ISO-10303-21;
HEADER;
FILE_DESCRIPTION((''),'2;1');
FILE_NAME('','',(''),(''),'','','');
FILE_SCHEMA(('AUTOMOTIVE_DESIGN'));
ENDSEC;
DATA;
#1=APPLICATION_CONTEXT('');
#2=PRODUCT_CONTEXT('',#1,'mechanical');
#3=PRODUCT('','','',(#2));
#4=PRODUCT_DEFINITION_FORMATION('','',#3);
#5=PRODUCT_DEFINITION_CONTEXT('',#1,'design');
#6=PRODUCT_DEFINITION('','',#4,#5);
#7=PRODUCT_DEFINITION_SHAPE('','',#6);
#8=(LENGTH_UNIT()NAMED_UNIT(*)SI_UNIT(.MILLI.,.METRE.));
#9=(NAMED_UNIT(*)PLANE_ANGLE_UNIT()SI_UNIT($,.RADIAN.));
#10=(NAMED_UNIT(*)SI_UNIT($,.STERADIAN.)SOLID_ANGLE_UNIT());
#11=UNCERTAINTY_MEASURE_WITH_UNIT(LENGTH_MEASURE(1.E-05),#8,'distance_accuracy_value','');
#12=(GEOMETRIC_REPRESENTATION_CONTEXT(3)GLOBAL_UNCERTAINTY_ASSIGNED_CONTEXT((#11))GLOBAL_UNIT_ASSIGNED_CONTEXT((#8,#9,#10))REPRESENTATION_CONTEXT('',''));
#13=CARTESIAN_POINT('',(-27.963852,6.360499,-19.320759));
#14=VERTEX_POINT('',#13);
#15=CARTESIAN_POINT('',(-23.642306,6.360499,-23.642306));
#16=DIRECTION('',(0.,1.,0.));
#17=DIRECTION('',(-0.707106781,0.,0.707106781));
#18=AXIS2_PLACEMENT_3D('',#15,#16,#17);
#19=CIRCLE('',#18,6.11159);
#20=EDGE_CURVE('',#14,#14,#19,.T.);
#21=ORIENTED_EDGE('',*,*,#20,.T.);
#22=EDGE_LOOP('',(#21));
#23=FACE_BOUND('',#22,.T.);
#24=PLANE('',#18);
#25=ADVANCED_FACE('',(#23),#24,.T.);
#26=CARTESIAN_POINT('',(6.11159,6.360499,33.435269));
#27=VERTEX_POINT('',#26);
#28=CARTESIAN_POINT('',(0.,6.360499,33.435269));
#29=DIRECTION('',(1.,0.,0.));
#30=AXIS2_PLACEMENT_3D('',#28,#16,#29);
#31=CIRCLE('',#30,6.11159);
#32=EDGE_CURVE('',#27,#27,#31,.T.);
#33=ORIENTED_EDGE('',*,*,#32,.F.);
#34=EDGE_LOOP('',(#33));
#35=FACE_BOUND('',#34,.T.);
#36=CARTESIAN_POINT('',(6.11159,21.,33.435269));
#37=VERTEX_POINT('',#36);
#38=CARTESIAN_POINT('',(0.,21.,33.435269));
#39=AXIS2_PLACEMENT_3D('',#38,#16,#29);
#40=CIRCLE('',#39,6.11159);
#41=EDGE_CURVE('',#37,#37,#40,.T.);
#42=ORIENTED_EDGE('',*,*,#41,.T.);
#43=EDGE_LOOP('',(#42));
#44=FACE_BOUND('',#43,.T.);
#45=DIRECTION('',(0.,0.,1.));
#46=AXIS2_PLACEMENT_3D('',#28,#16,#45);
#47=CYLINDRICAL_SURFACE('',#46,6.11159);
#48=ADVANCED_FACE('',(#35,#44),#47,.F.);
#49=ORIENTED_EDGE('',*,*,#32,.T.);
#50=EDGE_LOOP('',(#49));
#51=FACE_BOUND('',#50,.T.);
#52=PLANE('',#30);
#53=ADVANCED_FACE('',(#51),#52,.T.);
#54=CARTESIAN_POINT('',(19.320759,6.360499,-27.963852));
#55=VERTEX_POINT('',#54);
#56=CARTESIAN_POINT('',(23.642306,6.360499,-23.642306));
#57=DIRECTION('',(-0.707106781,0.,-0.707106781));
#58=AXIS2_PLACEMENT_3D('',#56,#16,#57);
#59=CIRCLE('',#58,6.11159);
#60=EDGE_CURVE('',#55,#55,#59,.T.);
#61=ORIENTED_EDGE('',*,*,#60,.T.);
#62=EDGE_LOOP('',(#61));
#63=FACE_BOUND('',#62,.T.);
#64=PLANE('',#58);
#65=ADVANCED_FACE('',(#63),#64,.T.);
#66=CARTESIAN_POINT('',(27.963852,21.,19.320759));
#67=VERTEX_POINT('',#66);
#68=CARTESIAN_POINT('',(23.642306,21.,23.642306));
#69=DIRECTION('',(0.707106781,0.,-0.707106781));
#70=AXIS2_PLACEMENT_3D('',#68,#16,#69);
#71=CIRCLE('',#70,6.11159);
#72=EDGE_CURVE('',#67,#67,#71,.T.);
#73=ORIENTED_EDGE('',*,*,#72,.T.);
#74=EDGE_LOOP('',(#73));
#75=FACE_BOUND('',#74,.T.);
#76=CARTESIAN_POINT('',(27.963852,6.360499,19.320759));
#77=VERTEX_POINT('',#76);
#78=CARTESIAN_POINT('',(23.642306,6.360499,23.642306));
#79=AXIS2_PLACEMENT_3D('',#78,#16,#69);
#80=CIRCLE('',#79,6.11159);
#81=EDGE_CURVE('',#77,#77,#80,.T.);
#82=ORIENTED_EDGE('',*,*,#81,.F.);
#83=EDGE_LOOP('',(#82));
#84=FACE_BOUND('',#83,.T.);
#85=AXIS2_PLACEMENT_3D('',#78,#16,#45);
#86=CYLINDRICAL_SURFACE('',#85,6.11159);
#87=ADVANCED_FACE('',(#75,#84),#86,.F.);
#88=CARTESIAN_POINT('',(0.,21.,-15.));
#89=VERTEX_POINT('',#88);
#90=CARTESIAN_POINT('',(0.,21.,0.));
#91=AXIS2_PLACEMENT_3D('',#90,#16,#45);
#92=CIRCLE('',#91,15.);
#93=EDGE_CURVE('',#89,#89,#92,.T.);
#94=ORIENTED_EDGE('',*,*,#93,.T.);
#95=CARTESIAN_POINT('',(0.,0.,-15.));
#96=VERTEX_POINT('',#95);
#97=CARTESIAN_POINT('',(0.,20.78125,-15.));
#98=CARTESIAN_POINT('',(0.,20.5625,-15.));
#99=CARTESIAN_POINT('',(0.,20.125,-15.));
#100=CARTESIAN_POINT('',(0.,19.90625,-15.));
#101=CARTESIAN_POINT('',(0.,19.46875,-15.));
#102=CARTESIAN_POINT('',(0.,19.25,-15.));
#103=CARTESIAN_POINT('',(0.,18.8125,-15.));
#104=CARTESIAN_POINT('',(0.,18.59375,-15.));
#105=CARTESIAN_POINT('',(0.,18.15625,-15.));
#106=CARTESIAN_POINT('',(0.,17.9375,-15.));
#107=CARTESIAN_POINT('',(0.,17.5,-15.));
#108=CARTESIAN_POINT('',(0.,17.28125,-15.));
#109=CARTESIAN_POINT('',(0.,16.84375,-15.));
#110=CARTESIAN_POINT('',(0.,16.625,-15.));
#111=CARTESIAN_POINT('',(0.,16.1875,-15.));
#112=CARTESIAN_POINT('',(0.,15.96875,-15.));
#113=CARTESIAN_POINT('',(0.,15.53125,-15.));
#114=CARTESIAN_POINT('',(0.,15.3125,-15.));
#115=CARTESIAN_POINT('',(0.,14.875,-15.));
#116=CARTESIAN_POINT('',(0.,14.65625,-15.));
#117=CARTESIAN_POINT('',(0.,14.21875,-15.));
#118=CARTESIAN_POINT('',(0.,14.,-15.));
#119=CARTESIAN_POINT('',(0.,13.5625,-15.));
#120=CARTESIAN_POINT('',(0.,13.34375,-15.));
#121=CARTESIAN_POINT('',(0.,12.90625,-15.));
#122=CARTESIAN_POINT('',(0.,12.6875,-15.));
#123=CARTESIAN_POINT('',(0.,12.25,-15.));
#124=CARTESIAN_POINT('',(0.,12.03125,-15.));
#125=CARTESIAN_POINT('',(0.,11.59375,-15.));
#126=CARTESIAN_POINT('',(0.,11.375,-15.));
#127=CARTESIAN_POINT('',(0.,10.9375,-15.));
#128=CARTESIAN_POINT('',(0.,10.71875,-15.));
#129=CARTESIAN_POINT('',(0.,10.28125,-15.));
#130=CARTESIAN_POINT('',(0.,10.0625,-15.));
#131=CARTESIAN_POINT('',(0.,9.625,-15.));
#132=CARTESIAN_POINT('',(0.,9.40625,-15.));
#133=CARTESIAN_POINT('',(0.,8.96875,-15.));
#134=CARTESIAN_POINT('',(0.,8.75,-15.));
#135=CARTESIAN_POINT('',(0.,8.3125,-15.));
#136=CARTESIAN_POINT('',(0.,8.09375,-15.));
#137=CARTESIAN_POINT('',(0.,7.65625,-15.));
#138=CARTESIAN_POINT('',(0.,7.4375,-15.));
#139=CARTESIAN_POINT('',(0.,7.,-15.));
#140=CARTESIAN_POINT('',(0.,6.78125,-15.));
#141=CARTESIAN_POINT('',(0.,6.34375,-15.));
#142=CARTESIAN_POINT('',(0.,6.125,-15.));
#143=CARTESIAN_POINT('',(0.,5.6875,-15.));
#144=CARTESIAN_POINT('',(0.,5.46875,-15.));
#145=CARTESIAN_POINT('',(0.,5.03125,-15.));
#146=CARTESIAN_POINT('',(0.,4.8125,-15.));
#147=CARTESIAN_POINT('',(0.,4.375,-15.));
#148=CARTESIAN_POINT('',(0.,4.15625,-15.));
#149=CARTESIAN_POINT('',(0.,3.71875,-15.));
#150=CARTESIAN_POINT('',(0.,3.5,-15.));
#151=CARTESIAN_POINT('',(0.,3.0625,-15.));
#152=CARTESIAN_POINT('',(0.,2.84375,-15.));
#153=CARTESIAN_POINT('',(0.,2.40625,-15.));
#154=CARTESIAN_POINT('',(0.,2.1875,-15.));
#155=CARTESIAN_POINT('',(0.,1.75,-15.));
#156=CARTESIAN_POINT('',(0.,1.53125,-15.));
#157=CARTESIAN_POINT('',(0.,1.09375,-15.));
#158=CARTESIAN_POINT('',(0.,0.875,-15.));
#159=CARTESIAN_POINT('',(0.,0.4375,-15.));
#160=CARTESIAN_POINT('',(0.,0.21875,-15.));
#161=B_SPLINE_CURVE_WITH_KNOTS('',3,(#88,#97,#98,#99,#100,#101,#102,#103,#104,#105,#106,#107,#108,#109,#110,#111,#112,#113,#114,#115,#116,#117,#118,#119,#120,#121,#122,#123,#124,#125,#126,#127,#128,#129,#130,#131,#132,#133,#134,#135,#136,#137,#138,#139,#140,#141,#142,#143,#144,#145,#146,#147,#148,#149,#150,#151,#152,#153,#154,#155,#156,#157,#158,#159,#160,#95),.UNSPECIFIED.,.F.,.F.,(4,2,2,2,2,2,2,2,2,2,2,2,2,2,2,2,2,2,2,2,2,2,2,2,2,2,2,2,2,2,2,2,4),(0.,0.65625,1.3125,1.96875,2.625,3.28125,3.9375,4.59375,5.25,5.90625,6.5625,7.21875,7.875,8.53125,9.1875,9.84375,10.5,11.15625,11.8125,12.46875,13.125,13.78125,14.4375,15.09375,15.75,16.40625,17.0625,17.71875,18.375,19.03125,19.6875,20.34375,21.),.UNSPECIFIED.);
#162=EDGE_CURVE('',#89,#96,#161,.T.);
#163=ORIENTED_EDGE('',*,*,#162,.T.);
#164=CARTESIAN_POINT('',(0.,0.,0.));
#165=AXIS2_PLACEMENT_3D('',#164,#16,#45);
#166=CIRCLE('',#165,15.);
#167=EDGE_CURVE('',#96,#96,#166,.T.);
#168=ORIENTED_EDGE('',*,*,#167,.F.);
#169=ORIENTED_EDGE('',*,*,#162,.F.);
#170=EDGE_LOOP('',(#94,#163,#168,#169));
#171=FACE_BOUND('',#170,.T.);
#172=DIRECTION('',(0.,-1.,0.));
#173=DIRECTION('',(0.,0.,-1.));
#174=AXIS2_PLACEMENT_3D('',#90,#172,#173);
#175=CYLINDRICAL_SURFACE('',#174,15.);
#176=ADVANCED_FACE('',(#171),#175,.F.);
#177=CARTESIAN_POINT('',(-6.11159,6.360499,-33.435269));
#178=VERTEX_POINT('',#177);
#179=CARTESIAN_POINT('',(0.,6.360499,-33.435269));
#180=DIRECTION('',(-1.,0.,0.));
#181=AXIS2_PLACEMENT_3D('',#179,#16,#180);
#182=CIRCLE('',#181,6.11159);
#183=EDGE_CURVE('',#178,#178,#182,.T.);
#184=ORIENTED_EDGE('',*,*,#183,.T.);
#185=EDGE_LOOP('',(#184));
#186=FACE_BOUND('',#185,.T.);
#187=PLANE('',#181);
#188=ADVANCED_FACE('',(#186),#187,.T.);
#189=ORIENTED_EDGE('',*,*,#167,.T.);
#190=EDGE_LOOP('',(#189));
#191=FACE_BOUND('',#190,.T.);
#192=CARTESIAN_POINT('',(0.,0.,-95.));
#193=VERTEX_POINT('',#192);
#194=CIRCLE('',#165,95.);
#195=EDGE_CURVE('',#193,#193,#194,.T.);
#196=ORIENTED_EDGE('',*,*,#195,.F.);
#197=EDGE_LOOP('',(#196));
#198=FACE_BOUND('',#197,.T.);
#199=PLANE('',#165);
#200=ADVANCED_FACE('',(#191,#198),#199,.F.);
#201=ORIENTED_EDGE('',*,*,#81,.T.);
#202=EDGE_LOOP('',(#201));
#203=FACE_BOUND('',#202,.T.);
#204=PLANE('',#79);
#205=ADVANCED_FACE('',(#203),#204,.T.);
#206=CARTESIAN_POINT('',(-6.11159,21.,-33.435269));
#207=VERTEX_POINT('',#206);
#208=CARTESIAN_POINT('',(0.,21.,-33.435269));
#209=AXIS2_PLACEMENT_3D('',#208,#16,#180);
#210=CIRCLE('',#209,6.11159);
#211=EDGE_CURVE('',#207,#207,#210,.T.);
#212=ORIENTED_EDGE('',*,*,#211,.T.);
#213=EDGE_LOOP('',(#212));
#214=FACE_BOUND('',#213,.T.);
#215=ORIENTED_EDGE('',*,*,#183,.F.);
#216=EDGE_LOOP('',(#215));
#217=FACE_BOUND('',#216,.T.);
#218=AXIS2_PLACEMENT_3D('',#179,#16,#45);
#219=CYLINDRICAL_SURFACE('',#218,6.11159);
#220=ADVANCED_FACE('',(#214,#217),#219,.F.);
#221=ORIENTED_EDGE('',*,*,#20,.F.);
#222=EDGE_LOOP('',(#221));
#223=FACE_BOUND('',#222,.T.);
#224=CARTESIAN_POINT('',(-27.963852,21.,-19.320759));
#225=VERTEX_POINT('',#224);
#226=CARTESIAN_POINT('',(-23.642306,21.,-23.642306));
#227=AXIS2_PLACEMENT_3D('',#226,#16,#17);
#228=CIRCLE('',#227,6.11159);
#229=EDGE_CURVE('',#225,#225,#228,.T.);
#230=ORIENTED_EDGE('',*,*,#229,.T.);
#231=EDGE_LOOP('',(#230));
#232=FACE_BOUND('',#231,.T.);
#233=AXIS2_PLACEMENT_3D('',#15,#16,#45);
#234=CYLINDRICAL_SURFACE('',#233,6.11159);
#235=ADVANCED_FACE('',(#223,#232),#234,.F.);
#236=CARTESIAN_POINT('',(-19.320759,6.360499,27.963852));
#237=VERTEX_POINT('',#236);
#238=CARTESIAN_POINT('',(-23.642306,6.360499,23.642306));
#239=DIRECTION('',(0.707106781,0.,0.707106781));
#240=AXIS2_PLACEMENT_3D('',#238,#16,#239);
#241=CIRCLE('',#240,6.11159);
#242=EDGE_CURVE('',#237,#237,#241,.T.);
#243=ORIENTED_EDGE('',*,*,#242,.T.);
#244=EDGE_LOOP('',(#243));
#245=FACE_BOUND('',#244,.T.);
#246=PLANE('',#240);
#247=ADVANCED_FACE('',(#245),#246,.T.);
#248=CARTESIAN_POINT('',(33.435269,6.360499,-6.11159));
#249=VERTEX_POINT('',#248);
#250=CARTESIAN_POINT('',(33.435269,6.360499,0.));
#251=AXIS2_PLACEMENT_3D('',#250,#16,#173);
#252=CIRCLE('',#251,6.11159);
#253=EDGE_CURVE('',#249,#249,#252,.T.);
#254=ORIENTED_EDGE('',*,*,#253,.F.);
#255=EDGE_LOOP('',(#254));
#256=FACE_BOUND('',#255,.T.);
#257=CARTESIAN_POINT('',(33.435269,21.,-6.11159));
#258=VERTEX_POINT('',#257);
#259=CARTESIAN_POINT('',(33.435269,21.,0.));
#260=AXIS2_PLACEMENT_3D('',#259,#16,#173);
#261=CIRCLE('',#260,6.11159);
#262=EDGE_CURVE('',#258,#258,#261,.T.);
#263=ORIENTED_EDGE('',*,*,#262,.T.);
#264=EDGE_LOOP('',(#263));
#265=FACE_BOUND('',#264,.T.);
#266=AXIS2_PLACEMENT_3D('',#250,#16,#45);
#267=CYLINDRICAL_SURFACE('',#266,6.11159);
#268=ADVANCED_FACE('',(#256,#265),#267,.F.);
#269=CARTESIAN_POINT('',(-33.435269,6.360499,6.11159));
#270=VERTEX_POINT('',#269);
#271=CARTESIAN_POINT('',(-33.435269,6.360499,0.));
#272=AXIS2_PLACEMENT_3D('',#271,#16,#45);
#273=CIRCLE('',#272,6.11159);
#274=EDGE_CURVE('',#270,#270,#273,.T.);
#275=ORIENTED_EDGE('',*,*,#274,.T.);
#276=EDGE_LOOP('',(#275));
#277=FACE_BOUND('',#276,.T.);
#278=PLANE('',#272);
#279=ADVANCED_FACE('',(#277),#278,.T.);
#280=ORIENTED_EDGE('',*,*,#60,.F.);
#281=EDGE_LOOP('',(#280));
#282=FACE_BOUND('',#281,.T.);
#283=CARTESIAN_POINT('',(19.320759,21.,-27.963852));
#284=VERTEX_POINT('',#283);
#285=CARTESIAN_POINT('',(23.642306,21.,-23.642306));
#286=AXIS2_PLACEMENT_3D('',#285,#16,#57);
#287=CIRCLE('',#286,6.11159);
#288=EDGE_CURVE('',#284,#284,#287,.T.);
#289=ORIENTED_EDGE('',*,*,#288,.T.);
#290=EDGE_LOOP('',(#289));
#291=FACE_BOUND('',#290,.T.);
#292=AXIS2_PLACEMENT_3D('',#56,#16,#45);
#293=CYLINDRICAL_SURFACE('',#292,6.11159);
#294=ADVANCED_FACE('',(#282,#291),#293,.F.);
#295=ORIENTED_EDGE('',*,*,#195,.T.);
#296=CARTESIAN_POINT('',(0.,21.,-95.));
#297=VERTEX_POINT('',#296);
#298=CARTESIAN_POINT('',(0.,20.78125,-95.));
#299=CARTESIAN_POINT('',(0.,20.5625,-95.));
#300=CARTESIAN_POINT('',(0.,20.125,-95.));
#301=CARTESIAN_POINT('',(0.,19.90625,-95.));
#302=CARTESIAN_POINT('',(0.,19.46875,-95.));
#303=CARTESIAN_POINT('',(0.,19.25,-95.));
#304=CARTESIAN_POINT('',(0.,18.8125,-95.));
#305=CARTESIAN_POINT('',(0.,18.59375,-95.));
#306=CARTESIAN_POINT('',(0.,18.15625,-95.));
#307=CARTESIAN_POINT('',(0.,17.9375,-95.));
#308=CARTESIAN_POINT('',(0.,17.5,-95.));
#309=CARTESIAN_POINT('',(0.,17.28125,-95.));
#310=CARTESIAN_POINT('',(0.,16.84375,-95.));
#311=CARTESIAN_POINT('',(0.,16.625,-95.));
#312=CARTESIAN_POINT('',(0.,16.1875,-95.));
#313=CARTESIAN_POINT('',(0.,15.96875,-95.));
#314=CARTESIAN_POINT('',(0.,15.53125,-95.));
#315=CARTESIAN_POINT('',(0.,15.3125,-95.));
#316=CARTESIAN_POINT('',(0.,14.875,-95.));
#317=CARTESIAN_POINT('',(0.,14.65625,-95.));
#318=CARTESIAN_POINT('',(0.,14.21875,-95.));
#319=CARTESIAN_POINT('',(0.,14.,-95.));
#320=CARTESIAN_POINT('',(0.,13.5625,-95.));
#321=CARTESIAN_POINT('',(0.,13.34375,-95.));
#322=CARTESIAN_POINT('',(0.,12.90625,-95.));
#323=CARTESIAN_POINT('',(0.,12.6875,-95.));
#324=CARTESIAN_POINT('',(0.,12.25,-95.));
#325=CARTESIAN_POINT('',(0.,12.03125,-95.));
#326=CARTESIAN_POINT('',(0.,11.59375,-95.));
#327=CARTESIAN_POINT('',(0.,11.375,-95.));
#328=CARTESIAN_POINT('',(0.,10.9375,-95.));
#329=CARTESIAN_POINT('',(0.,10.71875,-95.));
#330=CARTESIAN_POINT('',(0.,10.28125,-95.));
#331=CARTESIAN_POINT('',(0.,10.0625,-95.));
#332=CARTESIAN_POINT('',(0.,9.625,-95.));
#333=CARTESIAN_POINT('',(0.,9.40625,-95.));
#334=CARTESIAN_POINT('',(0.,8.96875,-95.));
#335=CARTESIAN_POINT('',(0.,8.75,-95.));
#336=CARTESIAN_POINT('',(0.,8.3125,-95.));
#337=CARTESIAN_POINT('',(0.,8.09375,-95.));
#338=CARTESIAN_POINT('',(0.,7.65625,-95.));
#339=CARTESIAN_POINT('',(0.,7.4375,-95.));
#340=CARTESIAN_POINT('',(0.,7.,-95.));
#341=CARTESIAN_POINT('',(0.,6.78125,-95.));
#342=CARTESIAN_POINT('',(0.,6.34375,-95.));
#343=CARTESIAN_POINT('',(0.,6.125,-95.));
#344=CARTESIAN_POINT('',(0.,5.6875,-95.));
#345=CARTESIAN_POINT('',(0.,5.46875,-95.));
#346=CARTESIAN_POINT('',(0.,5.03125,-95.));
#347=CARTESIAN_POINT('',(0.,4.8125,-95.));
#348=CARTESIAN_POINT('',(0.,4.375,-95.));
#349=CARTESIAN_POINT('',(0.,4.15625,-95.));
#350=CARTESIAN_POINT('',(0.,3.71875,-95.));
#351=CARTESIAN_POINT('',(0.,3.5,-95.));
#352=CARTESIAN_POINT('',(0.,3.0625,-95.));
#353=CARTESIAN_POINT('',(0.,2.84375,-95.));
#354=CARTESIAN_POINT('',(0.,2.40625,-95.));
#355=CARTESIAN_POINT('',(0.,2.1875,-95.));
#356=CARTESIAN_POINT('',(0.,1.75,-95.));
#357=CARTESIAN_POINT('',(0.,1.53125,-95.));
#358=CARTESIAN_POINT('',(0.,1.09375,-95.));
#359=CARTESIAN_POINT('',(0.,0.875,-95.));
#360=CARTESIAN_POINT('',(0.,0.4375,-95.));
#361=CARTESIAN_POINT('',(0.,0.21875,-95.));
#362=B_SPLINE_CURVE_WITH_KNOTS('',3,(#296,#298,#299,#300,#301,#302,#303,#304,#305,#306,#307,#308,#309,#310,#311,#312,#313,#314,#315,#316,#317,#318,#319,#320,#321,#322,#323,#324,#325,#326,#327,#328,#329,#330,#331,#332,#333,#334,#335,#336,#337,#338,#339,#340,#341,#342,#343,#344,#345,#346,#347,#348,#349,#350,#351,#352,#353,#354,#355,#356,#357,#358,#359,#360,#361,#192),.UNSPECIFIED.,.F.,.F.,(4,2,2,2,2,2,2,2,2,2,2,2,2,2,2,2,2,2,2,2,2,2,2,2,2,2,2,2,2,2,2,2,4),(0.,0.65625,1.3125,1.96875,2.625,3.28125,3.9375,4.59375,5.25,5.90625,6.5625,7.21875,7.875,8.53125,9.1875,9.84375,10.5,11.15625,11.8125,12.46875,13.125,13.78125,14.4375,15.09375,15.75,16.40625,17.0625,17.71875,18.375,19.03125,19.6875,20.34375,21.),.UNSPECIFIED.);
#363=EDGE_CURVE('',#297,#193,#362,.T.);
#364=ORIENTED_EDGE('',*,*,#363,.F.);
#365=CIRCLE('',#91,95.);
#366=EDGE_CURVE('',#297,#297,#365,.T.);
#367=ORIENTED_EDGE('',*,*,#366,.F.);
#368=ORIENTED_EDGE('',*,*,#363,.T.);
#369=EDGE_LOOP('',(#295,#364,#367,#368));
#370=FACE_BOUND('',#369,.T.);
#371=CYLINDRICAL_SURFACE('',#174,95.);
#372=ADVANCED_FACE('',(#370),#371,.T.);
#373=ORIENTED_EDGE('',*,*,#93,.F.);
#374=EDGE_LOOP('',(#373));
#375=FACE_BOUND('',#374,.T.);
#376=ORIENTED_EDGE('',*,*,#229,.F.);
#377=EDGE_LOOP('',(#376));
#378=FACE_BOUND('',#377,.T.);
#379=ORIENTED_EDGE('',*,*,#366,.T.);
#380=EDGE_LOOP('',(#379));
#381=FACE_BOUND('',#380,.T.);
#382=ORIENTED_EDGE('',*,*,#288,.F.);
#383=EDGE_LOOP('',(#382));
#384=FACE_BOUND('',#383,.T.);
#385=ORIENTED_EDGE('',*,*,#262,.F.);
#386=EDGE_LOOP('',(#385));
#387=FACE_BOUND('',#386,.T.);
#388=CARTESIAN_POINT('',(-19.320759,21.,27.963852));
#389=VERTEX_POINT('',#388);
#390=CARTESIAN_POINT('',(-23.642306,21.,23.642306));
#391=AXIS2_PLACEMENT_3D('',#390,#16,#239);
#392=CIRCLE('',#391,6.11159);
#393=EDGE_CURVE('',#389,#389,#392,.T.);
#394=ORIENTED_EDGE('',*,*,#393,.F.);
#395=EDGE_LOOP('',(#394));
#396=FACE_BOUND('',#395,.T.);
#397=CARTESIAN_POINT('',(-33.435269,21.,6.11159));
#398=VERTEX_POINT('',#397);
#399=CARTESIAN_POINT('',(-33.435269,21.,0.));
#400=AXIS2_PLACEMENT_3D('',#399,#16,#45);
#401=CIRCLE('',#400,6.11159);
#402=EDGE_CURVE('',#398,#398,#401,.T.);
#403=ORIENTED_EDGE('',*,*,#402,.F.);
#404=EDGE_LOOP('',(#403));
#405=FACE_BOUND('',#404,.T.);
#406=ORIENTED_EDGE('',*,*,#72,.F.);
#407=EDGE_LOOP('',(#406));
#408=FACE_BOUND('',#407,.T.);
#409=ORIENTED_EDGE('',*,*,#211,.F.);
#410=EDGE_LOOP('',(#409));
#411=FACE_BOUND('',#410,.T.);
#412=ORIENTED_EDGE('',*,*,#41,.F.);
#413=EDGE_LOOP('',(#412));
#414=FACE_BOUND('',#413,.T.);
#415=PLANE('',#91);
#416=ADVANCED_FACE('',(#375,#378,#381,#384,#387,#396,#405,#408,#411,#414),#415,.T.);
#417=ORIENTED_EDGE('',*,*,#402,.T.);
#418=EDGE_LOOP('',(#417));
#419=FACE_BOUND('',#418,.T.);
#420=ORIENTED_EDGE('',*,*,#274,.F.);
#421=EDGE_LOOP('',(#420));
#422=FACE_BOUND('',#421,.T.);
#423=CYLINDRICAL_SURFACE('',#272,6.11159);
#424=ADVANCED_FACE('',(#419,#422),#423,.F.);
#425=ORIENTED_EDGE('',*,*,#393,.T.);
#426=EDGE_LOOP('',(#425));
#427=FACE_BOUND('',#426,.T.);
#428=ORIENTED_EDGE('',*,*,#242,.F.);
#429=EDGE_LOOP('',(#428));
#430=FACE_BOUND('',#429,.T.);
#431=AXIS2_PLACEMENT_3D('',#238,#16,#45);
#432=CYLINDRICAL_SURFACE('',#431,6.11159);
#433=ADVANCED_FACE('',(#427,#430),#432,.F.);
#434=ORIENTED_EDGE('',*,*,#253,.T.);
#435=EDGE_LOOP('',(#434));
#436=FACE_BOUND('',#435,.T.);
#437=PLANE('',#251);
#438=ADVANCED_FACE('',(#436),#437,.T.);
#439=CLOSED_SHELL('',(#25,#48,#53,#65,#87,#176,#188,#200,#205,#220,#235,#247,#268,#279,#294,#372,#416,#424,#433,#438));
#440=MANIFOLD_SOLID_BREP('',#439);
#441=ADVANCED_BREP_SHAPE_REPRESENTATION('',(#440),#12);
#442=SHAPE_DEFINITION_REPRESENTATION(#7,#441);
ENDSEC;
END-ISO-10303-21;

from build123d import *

# Parameters (mm, degrees)
SKETCH1_R           = 95
BOSS_EXTRUDE1_DEPTH = 21
SKETCH2_R           = 15
CUT_EXTRUDE1_DEPTH  = 136.981616405
SKETCH3_R           = 6.111589818
CUT_EXTRUDE2_DEPTH  = 14.639500916
CIRPATTERN1_COUNT   = 8


with BuildPart() as part:
    # Sketch1 → Boss-Extrude1 (new body)
    with BuildSketch(Plane(origin=(0, 0, 0), x_dir=(1, 0, 0), z_dir=(0, 1, 0))):
        Circle(SKETCH1_R)
    extrude(amount=BOSS_EXTRUDE1_DEPTH)

    # Sketch2 → Cut-Extrude1 (cut, through all)
    with BuildSketch(Plane(origin=(0, 0, 0), x_dir=(1, 0, 0), z_dir=(0, 1, 0))):
        Circle(SKETCH2_R)
    extrude(amount=CUT_EXTRUDE1_DEPTH, mode=Mode.SUBTRACT)

    # Sketch3 → Cut-Extrude2 (cut)
    with BuildSketch(Plane(origin=(0, 21, 0), x_dir=(1, 0, 0), z_dir=(0, 1, 0))):
        with Locations((-33.435269409, 0)):
            Circle(SKETCH3_R)
    cut_extrude2 = extrude(amount=-CUT_EXTRUDE2_DEPTH, mode=Mode.SUBTRACT)

    # CirPattern1: Cut-Extrude2 ×8 about axis
    cirpattern1_axis = Axis((0, 0, 0), (0, 1, 0))
    for i in range(1, CIRPATTERN1_COUNT):
        add(cut_extrude2.rotate(cirpattern1_axis, i * 360 / CIRPATTERN1_COUNT), mode=Mode.SUBTRACT)


solid = part.part
